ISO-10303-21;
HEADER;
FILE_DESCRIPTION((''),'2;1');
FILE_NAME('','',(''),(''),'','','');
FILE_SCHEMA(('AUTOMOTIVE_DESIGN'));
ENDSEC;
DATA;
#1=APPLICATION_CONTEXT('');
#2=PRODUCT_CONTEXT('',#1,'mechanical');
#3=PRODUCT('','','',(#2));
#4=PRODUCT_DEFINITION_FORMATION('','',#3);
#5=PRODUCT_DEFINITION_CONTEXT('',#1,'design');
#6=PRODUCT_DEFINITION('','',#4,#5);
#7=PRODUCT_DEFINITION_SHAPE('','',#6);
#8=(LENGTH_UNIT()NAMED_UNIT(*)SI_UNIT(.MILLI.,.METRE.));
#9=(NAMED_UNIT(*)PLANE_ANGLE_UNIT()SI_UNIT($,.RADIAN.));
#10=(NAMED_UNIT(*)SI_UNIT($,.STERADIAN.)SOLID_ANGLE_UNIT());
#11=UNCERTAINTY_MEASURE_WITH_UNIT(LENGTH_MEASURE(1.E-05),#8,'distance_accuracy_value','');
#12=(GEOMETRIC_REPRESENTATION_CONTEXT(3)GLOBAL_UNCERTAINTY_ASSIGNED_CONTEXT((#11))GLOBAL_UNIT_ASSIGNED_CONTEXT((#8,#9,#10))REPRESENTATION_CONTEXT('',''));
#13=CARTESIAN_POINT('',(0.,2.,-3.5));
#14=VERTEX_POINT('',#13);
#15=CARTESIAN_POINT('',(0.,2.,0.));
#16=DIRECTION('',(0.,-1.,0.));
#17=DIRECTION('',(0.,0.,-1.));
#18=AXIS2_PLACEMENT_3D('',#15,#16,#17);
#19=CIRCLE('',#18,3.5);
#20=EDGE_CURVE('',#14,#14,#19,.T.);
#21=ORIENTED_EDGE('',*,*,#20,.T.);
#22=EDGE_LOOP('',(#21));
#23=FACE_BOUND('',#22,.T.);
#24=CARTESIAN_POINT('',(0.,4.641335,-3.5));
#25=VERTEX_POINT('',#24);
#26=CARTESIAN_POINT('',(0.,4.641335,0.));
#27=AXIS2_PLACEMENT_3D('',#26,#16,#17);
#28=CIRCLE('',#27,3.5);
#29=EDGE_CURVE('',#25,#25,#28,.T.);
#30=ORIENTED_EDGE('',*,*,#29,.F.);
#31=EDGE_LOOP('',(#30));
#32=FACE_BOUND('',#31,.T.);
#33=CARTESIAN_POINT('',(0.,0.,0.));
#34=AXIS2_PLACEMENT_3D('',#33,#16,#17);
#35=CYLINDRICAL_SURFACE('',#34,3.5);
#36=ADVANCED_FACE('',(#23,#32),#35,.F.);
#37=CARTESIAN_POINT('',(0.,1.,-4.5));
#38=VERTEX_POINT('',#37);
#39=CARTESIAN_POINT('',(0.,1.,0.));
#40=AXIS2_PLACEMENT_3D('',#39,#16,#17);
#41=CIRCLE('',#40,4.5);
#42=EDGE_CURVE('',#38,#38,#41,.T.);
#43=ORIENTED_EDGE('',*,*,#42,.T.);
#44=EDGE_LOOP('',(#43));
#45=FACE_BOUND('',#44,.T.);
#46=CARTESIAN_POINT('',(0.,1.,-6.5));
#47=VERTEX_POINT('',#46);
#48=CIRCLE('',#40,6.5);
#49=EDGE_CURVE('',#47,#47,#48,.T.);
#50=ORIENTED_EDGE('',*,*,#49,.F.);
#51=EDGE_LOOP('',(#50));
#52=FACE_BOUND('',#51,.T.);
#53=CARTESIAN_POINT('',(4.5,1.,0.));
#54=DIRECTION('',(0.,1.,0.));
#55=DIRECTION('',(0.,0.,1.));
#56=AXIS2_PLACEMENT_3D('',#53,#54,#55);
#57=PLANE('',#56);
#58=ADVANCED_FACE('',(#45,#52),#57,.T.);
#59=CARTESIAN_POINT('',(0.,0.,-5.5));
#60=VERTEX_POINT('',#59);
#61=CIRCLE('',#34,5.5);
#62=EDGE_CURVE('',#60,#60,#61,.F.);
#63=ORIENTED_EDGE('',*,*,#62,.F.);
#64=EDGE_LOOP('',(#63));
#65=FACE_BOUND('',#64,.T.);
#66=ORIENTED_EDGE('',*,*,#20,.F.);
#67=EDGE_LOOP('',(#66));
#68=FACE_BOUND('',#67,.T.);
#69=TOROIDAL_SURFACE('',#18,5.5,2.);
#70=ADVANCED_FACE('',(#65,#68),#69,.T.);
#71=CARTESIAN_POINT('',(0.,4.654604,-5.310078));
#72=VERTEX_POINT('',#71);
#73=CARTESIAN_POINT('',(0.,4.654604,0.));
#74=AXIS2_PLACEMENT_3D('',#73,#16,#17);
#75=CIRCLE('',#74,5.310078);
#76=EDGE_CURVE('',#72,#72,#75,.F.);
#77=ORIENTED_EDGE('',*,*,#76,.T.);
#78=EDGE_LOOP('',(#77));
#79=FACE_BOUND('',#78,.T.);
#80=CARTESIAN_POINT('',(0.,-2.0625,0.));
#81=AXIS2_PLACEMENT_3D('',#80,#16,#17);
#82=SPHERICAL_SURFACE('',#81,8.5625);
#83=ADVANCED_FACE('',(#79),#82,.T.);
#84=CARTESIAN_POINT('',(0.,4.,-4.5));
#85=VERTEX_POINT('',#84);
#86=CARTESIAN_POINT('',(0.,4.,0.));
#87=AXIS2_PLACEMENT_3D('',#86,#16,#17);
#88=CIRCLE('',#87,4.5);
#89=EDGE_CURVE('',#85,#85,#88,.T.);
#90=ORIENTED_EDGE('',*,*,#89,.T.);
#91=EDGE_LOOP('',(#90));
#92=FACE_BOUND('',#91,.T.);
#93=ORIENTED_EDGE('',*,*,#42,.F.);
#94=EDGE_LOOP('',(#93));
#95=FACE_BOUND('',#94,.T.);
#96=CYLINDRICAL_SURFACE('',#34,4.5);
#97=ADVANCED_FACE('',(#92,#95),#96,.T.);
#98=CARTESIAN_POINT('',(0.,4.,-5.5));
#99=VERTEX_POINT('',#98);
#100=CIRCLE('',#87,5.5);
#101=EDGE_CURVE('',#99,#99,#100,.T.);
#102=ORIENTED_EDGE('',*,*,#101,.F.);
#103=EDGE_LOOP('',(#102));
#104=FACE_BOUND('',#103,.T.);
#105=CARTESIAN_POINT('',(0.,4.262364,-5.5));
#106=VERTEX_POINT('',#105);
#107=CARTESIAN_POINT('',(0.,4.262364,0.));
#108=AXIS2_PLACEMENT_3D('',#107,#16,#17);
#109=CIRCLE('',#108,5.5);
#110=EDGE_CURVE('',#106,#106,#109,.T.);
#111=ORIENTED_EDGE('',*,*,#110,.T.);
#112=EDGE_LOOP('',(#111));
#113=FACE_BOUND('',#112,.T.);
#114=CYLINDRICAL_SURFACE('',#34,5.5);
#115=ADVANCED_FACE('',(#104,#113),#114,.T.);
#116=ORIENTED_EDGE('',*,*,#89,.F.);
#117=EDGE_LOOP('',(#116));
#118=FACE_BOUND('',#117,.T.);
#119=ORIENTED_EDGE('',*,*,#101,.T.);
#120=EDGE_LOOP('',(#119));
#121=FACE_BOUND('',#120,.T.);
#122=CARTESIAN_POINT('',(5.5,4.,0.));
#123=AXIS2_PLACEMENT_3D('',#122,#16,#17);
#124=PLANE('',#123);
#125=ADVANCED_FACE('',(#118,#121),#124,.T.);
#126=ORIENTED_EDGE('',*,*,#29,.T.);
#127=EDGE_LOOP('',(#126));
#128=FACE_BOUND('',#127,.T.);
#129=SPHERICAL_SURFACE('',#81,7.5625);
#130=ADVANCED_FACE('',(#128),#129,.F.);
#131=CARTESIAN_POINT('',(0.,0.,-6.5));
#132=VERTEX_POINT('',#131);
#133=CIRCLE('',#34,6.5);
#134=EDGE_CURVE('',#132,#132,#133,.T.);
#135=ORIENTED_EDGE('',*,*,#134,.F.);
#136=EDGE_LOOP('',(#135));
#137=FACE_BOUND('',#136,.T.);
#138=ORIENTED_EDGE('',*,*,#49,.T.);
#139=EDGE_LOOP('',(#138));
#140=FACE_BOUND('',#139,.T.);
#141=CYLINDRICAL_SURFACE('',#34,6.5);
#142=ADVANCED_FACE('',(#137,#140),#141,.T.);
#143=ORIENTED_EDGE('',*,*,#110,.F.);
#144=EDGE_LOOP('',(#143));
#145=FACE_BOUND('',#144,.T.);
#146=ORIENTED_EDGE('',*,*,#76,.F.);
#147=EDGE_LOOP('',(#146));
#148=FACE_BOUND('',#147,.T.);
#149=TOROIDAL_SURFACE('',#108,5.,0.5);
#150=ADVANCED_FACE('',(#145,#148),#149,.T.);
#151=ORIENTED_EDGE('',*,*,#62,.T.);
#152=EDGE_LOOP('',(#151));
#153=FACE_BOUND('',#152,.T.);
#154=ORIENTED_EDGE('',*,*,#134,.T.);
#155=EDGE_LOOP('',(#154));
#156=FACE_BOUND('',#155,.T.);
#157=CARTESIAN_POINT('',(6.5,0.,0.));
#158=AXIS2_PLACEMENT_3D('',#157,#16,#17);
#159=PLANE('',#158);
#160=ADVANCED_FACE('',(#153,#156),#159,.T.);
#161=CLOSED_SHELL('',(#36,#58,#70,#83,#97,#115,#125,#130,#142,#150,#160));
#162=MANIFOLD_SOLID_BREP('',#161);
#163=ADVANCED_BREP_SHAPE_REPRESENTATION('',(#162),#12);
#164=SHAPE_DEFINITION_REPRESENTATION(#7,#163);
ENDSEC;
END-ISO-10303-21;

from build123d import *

# Parameters (mm, degrees)
D_ME1_FACE_RADIUS = 5.5
D_ME1_HEIGHT      = 2
CONG_1_R          = 0.5
CONG_2_R          = 2


# Read off the part's stored shape, not the designer's step: Coque1
with BuildPart() as part:
    # Esquisse1 → Révolution1 (revolve)
    with BuildSketch(Plane.XY, mode=Mode.PRIVATE) as r_volution1_sk:
        Polygon((0, 0), (0, 4.5), (5.5, 4.5), (5.5, 4), (4.5, 4), (4.5, 1), (6.5, 1), (6.5, 0), align=None)
    revolve(r_volution1_sk.sketch.rotate(Axis((0, 0, 0), (0, 1, 0)), 90), axis=Axis((0, 0, 0), (0, 1, 0)))

    # Dôme1: a dome of height H over a round flat face of radius A is a cap of a sphere of radius (A * A + H * H) / (2 * H)
    d_me1_r = (D_ME1_FACE_RADIUS * D_ME1_FACE_RADIUS + D_ME1_HEIGHT * D_ME1_HEIGHT) / (2 * D_ME1_HEIGHT)
    d_me1_base = Plane((0, 4.5, 0), z_dir=(0, 1, 0))
    with Locations(d_me1_base.offset(D_ME1_HEIGHT - d_me1_r)):
        d_me1_ball = Sphere(d_me1_r, mode=Mode.PRIVATE)
    add(split(d_me1_ball, bisect_by=d_me1_base, keep=Keep.TOP, mode=Mode.PRIVATE))

    # Congé1
    cong_1_edges = [part.edges().sort_by_distance(p)[0] for p in [
        (5.5, 4.5, 0),
    ]]
    fillet(cong_1_edges, radius=CONG_1_R)

    # Coque1 outline → Coque1 (revolve, cut)
    with BuildSketch(Plane.XY):
        with BuildLine():
            Line((3.5, 0), (3.500000007, 4.641335186))
            ThreePointArc((3.500000007, 4.641335186), (1.801895205, 5.282197402), (0, 5.5))
            Line((0, 5.5), (0, 0))
            Line((0, 0), (3.5, 0))
        make_face()
    revolve(axis=Axis((0, 0, 0), (0, 1, 0)), mode=Mode.SUBTRACT)

    # Congé2
    cong_2_edges = [part.edges().sort_by_distance(p)[0] for p in [
        (-3.5, 0, 0),
    ]]
    fillet(cong_2_edges, radius=CONG_2_R)


solid = part.part
